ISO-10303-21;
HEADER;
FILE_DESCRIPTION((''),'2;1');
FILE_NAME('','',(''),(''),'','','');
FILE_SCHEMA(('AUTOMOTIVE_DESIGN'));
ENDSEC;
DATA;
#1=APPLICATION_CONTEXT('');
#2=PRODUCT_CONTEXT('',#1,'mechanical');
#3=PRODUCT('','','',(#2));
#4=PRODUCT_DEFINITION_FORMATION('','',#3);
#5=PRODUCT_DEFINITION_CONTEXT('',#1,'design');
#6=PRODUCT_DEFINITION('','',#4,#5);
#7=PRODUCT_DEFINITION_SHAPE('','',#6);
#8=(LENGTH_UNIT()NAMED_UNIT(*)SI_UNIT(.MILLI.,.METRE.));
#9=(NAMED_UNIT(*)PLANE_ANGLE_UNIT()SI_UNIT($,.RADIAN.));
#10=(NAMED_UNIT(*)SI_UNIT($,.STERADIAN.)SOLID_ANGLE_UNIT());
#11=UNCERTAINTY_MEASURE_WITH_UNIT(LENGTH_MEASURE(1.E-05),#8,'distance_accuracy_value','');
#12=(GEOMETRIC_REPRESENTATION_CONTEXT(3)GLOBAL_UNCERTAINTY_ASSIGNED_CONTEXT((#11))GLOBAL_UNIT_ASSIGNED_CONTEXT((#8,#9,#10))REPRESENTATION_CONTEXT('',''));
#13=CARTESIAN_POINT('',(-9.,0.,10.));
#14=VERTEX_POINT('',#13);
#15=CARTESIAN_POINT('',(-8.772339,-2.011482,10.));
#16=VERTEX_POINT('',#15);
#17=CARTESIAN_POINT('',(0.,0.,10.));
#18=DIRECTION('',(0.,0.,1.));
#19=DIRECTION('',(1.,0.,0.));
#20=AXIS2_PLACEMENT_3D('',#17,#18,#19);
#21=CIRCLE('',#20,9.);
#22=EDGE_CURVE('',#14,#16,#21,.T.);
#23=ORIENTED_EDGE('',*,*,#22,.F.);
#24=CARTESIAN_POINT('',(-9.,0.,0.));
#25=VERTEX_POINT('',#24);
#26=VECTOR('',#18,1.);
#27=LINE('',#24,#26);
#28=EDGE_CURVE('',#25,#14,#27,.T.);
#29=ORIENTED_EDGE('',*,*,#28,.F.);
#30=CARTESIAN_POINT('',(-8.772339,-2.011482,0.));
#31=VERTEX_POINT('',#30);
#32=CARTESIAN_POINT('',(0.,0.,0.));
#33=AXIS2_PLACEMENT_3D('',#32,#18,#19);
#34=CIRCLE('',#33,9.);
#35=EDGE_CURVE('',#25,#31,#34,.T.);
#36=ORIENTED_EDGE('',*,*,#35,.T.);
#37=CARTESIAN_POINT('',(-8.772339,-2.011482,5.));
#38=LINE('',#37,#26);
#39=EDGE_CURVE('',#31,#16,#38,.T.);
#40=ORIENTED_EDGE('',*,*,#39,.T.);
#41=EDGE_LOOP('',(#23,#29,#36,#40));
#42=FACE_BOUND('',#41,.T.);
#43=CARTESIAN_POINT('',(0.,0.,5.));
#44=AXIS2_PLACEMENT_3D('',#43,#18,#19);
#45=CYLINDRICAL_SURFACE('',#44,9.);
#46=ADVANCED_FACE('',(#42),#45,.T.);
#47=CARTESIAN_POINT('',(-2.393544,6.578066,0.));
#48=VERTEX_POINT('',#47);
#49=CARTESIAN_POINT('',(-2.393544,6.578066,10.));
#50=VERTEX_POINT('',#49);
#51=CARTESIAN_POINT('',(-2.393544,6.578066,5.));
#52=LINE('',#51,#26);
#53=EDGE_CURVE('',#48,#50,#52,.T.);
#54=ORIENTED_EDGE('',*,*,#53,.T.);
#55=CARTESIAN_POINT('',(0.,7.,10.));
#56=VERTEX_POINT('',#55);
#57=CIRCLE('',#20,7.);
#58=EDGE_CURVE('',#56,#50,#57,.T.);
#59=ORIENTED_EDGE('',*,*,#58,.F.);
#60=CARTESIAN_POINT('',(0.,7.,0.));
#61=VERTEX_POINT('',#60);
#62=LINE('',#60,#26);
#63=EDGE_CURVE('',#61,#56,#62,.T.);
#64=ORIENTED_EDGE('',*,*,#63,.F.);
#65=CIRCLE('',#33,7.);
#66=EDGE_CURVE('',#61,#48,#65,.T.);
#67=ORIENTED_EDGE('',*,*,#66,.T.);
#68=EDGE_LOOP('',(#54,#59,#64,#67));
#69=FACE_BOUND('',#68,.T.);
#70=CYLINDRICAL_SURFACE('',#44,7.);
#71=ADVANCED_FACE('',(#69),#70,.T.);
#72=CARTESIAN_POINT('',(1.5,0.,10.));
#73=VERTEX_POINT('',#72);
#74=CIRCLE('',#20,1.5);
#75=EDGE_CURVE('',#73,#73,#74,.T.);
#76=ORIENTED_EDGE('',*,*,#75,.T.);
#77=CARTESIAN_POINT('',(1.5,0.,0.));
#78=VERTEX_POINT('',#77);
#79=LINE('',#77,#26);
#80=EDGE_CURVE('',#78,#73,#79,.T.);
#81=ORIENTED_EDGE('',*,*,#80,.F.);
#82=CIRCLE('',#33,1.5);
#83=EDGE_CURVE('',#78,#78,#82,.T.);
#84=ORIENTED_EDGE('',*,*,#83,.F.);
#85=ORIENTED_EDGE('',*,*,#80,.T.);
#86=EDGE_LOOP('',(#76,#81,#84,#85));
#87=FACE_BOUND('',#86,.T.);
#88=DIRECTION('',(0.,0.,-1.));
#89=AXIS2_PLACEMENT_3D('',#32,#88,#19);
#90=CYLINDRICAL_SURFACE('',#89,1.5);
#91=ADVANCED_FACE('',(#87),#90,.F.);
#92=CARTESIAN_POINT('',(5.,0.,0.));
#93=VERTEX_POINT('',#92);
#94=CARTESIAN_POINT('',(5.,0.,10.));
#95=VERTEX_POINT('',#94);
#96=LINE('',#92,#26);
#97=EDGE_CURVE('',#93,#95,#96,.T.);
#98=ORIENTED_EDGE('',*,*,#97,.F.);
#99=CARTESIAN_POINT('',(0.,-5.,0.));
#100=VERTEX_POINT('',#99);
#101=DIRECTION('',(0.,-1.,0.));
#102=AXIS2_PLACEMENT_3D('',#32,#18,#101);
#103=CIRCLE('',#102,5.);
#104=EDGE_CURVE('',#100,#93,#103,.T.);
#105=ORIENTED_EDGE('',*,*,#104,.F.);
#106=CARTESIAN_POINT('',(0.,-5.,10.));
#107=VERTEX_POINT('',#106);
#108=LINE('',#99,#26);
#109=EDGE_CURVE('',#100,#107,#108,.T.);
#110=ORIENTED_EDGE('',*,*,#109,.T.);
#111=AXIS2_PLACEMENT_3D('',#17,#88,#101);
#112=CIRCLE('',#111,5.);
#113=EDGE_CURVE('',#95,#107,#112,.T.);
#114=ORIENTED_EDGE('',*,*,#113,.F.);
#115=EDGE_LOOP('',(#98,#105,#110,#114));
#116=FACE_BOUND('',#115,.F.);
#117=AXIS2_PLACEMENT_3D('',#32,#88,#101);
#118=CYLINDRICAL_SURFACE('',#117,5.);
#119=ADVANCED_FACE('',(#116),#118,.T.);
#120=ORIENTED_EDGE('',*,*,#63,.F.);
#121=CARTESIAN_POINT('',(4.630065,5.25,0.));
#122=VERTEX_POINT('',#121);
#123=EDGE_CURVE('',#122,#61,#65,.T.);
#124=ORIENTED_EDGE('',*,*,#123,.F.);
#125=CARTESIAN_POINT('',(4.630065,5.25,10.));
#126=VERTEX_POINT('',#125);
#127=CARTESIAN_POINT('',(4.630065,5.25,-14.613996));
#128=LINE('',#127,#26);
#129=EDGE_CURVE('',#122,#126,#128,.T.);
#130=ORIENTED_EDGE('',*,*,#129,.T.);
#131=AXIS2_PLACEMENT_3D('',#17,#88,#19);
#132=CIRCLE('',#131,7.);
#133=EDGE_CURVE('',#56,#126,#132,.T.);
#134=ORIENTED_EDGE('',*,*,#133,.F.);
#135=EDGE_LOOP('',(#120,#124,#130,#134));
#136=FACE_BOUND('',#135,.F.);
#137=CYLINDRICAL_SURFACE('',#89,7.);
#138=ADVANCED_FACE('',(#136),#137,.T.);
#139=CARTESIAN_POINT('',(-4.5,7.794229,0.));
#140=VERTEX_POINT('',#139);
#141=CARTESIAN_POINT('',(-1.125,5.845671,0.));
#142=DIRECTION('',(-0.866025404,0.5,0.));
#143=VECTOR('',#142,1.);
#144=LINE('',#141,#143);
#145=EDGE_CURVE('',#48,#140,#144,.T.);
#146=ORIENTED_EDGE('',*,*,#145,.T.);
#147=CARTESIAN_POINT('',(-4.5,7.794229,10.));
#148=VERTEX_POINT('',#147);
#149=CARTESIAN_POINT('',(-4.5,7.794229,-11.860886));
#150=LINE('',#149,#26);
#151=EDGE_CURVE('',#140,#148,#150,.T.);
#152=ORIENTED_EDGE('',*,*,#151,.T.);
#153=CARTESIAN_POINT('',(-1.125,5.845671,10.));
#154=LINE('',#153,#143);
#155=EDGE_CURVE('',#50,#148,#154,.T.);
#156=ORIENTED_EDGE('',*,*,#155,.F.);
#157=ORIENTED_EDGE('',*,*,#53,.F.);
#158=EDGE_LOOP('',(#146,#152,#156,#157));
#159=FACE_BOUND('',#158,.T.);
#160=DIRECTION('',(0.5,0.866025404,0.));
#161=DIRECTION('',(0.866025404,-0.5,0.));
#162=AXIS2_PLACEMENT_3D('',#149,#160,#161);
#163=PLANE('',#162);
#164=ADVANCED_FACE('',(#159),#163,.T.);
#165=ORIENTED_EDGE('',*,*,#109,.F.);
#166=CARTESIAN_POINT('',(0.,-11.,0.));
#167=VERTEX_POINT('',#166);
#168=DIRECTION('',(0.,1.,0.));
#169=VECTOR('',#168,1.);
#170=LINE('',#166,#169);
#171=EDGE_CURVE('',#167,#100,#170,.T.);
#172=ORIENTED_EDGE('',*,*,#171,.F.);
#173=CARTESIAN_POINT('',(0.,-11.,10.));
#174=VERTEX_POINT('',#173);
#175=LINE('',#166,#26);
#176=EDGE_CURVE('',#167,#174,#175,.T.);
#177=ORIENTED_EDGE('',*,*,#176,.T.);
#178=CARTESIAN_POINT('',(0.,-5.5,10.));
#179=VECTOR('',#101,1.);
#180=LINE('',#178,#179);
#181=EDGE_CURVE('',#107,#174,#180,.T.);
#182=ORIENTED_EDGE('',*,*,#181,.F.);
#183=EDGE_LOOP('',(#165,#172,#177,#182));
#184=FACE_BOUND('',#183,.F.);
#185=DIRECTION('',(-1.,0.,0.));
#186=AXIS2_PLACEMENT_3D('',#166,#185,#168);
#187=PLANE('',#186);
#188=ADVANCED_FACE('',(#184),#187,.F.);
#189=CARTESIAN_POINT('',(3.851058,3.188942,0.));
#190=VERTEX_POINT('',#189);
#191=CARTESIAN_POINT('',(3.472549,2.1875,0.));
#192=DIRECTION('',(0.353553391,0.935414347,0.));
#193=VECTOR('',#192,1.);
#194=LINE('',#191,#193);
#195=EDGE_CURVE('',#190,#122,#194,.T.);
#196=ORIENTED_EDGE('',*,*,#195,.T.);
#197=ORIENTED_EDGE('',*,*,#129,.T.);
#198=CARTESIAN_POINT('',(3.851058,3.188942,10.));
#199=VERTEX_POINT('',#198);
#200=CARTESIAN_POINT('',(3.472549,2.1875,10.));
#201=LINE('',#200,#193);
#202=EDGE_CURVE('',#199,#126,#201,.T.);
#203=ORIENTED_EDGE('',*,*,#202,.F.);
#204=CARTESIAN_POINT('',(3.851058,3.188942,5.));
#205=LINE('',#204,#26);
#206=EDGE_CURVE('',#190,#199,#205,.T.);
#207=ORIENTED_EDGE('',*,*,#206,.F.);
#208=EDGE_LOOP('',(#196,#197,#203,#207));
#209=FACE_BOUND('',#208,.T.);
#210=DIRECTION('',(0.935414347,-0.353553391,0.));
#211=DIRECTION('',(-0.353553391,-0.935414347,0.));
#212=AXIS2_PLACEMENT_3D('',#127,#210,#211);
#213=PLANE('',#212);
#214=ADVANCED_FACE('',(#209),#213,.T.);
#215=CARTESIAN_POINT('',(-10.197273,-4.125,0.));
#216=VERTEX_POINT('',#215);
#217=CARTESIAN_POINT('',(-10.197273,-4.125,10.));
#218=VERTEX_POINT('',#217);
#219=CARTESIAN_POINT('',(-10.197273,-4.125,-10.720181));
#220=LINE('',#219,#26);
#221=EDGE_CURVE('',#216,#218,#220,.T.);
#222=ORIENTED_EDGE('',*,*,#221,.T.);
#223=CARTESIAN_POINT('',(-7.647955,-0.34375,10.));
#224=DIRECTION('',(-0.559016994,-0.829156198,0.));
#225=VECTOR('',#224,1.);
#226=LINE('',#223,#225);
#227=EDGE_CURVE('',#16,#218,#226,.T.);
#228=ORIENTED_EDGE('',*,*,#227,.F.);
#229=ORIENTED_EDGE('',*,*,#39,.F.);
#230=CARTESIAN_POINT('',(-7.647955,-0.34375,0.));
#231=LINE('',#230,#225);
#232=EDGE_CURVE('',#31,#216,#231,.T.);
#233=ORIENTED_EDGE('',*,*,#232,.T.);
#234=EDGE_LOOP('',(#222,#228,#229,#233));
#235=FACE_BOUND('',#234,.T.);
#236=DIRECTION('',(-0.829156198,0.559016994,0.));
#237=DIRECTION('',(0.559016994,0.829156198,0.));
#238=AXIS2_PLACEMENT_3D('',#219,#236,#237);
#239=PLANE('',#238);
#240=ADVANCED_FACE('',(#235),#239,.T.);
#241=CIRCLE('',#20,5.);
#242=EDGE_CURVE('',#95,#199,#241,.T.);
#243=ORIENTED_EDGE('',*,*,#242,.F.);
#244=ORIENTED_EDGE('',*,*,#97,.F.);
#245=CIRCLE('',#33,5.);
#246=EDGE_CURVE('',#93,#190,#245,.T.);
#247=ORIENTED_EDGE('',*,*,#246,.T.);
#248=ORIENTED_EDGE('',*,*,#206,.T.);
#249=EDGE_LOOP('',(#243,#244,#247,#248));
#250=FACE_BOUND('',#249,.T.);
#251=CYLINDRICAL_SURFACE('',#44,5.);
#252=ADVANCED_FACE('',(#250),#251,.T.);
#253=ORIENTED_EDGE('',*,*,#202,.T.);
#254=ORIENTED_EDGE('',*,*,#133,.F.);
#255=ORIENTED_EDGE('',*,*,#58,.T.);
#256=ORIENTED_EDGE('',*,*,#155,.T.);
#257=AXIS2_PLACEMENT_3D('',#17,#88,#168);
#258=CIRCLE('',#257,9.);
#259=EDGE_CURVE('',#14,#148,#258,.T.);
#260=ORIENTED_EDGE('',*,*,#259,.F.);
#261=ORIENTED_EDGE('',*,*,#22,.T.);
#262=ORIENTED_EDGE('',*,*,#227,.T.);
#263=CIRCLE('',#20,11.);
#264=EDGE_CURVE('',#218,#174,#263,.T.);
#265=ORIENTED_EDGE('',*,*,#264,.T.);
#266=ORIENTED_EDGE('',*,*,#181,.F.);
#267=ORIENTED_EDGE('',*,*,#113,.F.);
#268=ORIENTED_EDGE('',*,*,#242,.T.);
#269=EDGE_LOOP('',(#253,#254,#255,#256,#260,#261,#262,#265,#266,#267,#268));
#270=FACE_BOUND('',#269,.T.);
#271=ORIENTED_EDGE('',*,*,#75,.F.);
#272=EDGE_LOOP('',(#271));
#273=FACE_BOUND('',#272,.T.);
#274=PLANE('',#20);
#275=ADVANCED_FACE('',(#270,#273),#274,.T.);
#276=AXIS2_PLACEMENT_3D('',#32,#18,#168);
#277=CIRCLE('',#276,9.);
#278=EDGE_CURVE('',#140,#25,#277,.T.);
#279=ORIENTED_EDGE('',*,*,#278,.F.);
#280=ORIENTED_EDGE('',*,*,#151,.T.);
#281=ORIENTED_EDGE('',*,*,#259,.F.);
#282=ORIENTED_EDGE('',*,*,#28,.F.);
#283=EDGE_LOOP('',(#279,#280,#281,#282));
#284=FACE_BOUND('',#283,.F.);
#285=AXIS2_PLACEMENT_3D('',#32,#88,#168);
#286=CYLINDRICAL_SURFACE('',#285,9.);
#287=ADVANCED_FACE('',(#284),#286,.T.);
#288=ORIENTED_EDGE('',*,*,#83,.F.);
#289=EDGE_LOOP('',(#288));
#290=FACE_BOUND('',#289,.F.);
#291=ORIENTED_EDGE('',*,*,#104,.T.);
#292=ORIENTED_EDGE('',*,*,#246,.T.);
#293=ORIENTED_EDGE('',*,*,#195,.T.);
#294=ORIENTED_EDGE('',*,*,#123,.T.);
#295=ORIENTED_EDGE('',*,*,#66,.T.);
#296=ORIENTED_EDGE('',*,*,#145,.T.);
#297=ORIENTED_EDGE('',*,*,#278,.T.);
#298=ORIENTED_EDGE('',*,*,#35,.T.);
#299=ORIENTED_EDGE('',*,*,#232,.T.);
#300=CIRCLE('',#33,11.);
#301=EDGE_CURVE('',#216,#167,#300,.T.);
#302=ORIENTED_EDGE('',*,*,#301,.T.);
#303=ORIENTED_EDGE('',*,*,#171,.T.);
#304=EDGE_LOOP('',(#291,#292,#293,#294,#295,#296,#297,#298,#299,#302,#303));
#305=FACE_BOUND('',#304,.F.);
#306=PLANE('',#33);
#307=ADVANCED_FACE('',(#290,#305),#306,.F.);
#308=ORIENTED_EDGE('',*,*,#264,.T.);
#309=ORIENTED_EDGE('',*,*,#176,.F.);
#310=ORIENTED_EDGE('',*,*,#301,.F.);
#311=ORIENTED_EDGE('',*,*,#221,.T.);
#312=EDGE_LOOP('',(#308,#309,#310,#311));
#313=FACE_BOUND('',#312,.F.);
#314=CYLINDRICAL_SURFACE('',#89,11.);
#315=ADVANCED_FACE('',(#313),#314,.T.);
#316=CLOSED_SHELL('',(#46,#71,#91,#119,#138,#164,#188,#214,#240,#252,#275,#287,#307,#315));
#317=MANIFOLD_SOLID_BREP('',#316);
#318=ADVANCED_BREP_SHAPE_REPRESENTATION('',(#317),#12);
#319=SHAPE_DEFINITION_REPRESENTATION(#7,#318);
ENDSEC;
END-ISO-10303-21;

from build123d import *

# Parameters (mm, degrees)
F0_R         = 11
F0_R_2       = 1.5
F1_DEPTH     = 10
F3_DEPTH     = 25
F4_T4_DEPTH  = 31.4403610405
F4_S5_R      = 9
F4_T6_DEPTH  = 17
F4_T10_DEPTH = 33.7217724143
F4_S11_R     = 7
F4_T12_DEPTH = 19
F4_T16_DEPTH = 39.2279914145
F4_S17_R     = 5
F4_T18_DEPTH = 21


# Not quite as in the source:
# - a fillet or chamfer that OpenCascade refuses, or shapes differently, is made with other operations: its cross-section is extruded or revolved along the edge and cut away or added


with BuildPart() as f1:
    # F0 (on Top) → F1 (new body)
    with BuildSketch(Plane.XY):
        Circle(F0_R)
        Circle(F0_R_2, mode=Mode.SUBTRACT)
    extrude(amount=F1_DEPTH)

    # F2 (on face) → F3 (cut)
    with BuildSketch(Plane(origin=(0, 0, 0), x_dir=(1, 0, 0), z_dir=(0, 0, -1))):
        with BuildLine():
            ThreePointArc((0, -9), (-6.3639610307, -6.3639610307), (-9, 0))
            Line((-9, 0), (-11, 0))
            ThreePointArc((-11, 0), (-7.7781745931, -7.7781745931), (0, -11))
            Line((0, -11), (0, -9))
        make_face()
        with BuildLine():
            Line((11, 0), (9, 0))
            ThreePointArc((9, 0), (6.3639610307, -6.3639610307), (0, -9))
            Line((0, -9), (0, -11))
            ThreePointArc((0, -11), (7.7781745931, -7.7781745931), (11, 0))
        make_face()
        with BuildLine():
            Line((9, 0), (7, 0))
            ThreePointArc((7, 0), (4.9497474683, -4.9497474683), (0, -7))
            Line((0, -7), (0, -9))
            ThreePointArc((0, -9), (6.3639610307, -6.3639610307), (9, 0))
        make_face()
        with BuildLine():
            Line((0, 7), (0, 5))
            ThreePointArc((0, 5), (3.5355339059, 3.5355339059), (5, 0))
            Line((5, 0), (7, 0))
            ThreePointArc((7, 0), (4.9497474683, 4.9497474683), (0, 7))
        make_face()
        with BuildLine():
            Line((0, 9), (0, 7))
            ThreePointArc((0, 7), (4.9497474683, 4.9497474683), (7, 0))
            Line((7, 0), (9, 0))
            ThreePointArc((9, 0), (6.3639610307, 6.3639610307), (0, 9))
        make_face()
        with BuildLine():
            Line((0, 11), (0, 9))
            ThreePointArc((0, 9), (6.3639610307, 6.3639610307), (9, 0))
            Line((9, 0), (11, 0))
            ThreePointArc((11, 0), (7.7781745931, 7.7781745931), (0, 11))
        make_face()
    extrude(amount=-F3_DEPTH, mode=Mode.SUBTRACT)

    # F4: chamfer of 3 on 3 edges, made by hand


with BuildPart() as f4_tool2:
    # F4_s3 → F4_t4 (new body)
    with BuildSketch(Plane.XY.offset(-10.7201805202)):
        with BuildLine():
            Line((-10.1972729198, -4.125), (-7.4161984871, 0))
            Line((-7.4161984871, 0), (-11, 0))
            ThreePointArc((-11, 0), (-10.7891469286, -2.1434338231), (-10.1972729198, -4.125))
        make_face()
    extrude(amount=F4_T4_DEPTH)

    # F4_s5 → F4_t6 (cut, symmetric)
    with BuildSketch(Plane.XY.offset(5)):
        Circle(F4_S5_R)
    extrude(amount=F4_T6_DEPTH, both=True, mode=Mode.SUBTRACT)


with BuildPart() as f1_1:
    add(f1.part)

    # F4_t1: cut F4_tool2
    add(f4_tool2.part, mode=Mode.SUBTRACT)


with BuildPart() as f4_tool8:
    # F4_s9 → F4_t10 (new body)
    with BuildSketch(Plane.XY.offset(-11.8608862072)):
        with BuildLine():
            Line((-4.5, 7.7942286341), (0, 5.1961524227))
            Line((0, 5.1961524227), (0, 9))
            ThreePointArc((0, 9), (-2.3715637944, 8.6819171367), (-4.5, 7.7942286341))
        make_face()
    extrude(amount=F4_T10_DEPTH)

    # F4_s11 → F4_t12 (cut, symmetric)
    with BuildSketch(Plane.XY.offset(5)):
        Circle(F4_S11_R)
    extrude(amount=F4_T12_DEPTH, both=True, mode=Mode.SUBTRACT)


with BuildPart() as f1_2:
    add(f1_1.part)

    # F4_t7: cut F4_tool8
    add(f4_tool8.part, mode=Mode.SUBTRACT)


with BuildPart() as f4_tool14:
    # F4_s15 → F4_t16 (new body)
    with BuildSketch(Plane.XY.offset(-14.6139957073)):
        with BuildLine():
            Line((4.6300647944, 5.25), (2.6457513111, 0))
            Line((2.6457513111, 0), (7, 0))
            ThreePointArc((7, 0), (6.3609005548, 2.9221471784), (4.6300647944, 5.25))
        make_face()
    extrude(amount=F4_T16_DEPTH)

    # F4_s17 → F4_t18 (cut, symmetric)
    with BuildSketch(Plane.XY.offset(5)):
        Circle(F4_S17_R)
    extrude(amount=F4_T18_DEPTH, both=True, mode=Mode.SUBTRACT)


with BuildPart() as f1_3:
    add(f1_2.part)

    # F4_t13: cut F4_tool14
    add(f4_tool14.part, mode=Mode.SUBTRACT)


solid = f1_3.part
